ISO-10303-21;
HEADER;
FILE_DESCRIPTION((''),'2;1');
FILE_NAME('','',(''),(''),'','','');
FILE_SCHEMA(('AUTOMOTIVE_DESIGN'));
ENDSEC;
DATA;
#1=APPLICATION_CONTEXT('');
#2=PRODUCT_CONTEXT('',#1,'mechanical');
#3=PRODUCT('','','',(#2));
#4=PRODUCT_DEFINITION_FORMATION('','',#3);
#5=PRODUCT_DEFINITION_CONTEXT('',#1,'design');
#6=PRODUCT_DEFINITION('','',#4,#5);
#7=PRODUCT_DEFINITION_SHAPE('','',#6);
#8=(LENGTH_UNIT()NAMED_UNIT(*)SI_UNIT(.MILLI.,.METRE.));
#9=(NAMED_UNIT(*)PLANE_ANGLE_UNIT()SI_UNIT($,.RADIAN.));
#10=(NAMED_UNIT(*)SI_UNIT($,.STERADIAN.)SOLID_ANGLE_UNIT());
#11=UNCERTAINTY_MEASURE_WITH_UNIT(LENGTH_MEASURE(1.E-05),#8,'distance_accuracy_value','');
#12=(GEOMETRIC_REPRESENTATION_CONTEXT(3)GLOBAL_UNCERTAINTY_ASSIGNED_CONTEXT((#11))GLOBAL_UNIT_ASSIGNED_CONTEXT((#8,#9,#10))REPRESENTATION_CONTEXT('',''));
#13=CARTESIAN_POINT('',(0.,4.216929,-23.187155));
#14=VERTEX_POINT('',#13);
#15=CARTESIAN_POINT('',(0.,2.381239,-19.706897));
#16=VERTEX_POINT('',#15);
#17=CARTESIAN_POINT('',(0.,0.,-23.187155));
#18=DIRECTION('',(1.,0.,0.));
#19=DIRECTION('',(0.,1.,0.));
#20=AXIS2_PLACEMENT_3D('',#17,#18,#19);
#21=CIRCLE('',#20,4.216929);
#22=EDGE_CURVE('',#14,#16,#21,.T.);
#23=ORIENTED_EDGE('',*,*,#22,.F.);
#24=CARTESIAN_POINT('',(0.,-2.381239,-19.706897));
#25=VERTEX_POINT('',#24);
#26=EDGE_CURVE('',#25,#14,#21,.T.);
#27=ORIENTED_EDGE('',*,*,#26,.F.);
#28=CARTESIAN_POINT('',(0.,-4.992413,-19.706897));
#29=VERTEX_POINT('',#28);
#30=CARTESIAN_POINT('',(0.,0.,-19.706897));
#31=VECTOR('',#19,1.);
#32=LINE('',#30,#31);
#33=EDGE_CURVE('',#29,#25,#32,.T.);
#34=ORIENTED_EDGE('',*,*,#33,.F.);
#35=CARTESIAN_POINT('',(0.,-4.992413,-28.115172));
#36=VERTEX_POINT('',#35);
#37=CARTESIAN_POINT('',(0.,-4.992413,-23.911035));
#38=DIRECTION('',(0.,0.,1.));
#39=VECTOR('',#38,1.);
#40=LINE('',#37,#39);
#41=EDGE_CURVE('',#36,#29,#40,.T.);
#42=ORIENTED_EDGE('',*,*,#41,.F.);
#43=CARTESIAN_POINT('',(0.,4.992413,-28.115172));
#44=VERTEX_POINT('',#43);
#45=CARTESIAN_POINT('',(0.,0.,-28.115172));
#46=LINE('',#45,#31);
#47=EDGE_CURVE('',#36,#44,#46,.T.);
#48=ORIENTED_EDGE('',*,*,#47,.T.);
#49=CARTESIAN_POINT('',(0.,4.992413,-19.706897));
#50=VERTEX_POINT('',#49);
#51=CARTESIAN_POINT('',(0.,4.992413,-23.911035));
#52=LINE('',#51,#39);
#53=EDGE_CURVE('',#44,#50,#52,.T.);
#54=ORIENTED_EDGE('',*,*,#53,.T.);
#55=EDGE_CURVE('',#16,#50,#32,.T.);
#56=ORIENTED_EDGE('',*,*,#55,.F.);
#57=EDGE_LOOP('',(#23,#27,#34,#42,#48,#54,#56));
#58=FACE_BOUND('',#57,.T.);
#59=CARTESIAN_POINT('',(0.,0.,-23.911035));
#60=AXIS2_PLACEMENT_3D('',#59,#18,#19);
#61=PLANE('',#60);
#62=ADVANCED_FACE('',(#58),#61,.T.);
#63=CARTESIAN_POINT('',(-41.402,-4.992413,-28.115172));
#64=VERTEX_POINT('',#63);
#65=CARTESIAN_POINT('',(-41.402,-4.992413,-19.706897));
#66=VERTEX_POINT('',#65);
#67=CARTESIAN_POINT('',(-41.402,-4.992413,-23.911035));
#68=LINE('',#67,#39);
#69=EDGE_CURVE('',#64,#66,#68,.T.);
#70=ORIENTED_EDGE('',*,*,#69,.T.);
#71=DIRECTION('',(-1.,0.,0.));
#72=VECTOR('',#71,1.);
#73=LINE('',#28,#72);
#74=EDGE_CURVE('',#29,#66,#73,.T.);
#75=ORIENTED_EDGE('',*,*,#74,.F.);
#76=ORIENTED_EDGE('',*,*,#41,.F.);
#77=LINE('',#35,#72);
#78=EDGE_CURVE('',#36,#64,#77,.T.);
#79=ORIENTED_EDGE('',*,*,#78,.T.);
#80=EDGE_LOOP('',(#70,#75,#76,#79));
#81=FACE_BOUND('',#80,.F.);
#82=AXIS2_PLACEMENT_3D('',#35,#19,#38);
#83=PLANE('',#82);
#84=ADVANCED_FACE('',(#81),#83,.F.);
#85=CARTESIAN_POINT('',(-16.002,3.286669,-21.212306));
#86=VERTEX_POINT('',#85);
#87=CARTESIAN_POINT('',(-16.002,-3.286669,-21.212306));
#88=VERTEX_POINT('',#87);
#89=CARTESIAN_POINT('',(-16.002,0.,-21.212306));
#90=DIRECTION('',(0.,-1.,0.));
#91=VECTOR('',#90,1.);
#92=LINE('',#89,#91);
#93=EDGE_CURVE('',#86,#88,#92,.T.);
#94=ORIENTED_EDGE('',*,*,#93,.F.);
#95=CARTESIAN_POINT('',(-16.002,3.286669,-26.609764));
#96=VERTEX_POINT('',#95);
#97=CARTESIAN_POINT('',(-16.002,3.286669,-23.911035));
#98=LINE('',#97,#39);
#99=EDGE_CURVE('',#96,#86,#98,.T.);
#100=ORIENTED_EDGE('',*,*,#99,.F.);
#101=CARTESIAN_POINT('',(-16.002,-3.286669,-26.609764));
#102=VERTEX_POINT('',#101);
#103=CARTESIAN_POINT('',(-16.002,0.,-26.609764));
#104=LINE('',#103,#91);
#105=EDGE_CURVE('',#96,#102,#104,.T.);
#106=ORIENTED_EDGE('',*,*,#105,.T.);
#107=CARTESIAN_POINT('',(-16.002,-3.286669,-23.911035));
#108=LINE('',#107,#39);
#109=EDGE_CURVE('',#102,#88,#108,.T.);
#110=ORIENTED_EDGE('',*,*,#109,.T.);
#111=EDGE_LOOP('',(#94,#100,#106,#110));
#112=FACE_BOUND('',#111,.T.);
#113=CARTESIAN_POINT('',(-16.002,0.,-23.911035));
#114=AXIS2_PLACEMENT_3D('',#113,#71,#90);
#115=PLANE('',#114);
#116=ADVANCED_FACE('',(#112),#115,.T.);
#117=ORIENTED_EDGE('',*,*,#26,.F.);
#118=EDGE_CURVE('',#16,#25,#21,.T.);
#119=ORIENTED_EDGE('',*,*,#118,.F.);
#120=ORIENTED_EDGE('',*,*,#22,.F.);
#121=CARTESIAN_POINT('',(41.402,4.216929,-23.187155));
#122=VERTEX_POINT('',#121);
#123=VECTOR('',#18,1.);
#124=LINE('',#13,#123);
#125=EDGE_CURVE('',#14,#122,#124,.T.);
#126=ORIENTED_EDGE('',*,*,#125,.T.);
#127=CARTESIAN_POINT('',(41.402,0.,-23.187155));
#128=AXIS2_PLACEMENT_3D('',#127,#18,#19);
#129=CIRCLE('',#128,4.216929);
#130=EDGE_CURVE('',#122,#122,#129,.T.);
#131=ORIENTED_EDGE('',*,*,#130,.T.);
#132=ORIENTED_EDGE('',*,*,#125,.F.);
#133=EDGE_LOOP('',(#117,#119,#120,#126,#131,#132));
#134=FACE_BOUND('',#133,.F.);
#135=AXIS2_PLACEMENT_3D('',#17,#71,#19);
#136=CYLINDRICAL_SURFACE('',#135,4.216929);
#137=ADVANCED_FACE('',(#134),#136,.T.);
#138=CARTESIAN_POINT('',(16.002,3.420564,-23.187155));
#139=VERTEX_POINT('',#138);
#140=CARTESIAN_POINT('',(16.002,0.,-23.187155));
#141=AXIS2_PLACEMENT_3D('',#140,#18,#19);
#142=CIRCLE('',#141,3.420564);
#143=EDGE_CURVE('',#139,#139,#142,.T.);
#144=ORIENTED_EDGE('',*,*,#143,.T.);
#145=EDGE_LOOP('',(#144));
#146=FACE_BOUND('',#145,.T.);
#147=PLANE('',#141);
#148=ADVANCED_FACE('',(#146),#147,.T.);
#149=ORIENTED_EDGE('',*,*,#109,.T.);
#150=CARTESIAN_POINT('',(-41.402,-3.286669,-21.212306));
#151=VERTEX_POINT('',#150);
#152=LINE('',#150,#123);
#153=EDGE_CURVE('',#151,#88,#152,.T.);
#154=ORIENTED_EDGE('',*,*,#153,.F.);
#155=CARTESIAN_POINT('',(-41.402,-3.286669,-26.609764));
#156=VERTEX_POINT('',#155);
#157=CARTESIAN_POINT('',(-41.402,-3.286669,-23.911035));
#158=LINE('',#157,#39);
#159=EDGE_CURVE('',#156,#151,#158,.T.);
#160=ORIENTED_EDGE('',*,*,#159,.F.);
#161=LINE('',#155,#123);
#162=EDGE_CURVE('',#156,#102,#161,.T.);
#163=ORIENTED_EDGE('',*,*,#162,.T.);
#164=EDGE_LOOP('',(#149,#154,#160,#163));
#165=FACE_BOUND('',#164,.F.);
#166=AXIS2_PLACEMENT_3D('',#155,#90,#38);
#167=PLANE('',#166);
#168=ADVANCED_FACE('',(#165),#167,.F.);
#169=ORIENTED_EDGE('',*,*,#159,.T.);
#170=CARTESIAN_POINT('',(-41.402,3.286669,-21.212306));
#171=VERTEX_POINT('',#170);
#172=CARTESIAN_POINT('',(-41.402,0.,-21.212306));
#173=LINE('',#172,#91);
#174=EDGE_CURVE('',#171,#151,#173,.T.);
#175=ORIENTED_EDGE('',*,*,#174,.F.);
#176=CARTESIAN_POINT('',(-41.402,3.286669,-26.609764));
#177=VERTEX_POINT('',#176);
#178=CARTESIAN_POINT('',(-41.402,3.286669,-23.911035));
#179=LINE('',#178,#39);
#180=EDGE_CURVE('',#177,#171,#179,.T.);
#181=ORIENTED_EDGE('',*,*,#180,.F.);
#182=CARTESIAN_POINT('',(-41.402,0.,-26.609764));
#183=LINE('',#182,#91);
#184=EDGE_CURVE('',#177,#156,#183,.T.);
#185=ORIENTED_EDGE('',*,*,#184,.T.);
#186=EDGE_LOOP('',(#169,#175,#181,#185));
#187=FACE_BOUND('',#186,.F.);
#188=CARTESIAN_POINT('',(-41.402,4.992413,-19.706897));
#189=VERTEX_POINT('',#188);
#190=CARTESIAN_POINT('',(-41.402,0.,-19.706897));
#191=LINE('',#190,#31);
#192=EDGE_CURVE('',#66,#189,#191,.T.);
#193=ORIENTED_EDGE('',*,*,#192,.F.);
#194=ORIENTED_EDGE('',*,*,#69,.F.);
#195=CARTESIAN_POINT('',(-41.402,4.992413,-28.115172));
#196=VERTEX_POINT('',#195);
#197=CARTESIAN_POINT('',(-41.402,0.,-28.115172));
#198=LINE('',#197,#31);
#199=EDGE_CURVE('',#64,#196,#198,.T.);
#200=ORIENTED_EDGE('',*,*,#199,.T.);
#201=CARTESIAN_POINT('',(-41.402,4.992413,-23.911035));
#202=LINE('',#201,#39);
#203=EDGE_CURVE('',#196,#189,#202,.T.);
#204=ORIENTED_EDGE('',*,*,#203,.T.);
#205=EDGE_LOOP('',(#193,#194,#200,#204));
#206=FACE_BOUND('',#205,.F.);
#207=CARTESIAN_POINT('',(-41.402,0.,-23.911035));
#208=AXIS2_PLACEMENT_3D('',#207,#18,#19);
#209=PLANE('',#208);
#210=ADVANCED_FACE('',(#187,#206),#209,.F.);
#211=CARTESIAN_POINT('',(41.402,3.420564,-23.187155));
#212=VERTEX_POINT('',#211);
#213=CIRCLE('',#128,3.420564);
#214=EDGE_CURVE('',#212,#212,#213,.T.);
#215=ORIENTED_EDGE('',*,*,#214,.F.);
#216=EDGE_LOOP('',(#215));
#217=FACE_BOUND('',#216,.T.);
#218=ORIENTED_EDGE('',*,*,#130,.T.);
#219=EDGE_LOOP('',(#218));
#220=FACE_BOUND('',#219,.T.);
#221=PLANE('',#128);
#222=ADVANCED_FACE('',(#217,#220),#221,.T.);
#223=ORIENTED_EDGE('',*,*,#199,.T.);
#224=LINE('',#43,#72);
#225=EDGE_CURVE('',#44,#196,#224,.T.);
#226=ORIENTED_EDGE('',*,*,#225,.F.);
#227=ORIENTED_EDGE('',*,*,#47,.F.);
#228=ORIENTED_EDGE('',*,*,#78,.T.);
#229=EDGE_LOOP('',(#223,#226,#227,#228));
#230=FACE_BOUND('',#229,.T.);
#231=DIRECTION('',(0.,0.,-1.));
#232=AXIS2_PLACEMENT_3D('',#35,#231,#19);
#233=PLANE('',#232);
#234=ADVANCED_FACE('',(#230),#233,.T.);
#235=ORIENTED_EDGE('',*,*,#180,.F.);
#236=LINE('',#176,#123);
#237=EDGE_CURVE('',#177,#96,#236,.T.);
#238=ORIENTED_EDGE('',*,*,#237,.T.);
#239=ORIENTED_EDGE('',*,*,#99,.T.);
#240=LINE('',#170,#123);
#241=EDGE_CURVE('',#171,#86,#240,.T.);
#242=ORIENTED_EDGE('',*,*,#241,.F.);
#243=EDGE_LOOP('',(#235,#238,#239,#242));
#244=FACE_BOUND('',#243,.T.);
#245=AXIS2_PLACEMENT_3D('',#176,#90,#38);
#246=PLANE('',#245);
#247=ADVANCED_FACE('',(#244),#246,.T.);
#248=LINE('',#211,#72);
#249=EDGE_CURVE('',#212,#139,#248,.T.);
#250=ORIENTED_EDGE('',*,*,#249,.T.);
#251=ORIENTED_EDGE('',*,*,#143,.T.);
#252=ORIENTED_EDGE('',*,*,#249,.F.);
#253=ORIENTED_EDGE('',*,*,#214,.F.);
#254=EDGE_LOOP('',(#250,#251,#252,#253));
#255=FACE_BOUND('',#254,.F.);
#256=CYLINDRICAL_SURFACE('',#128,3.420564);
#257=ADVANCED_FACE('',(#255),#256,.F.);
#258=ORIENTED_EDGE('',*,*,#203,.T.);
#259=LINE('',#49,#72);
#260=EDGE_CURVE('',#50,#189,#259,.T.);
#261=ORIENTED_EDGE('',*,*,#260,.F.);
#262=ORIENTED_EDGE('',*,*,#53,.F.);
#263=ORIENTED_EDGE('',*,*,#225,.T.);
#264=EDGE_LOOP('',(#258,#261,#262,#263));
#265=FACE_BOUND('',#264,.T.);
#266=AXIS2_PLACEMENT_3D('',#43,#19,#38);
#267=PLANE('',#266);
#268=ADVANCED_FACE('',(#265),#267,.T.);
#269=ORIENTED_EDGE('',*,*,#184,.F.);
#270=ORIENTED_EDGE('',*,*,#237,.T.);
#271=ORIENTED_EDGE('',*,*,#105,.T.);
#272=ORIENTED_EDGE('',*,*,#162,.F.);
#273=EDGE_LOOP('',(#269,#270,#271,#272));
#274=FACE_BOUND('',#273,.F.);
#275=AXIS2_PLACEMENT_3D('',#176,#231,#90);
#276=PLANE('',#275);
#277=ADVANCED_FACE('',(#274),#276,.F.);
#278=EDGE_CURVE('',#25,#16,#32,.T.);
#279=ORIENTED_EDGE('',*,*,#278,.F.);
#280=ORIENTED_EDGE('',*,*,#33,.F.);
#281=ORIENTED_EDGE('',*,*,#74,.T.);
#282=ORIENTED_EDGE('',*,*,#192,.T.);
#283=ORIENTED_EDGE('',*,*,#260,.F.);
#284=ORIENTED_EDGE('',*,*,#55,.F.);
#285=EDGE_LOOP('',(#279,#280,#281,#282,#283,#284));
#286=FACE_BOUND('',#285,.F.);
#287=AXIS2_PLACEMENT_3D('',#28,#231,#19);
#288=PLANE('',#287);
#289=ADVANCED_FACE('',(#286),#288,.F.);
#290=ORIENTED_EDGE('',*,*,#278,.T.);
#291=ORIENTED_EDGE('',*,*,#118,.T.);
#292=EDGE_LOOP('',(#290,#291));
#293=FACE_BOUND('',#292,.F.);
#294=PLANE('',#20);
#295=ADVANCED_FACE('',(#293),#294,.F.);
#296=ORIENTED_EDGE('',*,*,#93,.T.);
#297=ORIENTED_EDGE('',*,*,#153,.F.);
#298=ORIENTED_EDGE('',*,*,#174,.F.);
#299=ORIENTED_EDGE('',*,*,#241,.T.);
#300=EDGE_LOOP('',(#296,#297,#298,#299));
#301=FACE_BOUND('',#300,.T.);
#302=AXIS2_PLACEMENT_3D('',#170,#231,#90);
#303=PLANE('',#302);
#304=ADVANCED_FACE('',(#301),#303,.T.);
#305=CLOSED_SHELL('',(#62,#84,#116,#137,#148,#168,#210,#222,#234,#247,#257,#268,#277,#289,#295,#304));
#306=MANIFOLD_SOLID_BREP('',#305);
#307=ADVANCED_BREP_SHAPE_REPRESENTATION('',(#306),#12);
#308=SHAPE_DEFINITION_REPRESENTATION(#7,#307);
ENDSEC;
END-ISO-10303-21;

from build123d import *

# Parameters (mm, degrees)
F2_R     = 4.2169292551
F3_DEPTH = 41.402
F4_R     = 3.4205639175
F5_DEPTH = 25.4
F6_W     = 9.9848257378
F6_H     = 8.4082745016
F7_DEPTH = 41.402
F8_W     = 6.5733380616
F8_H     = 5.3974576294
F9_DEPTH = 25.4


# Not quite as in the source:
# - the program builds the solid bodies; features that only make, move or delete a surface that nothing else refers to are left out


with BuildPart() as f3:
    # F2 (on Right) → F3 (new body)
    with BuildSketch(Plane.YZ):
        with Locations((0, -23.187154904)):
            Circle(F2_R)
    extrude(amount=F3_DEPTH)

    # F4 (on face) → F5 (cut)
    with BuildSketch(Plane.YZ.offset(41.402)):
        with Locations((0, -23.187154904)):
            Circle(F4_R)
    extrude(amount=-F5_DEPTH, mode=Mode.SUBTRACT)

    # F6 (on Right) → F7 (join)
    with BuildSketch(Plane.YZ):
        with Locations((0, -23.9110346884)):
            Rectangle(F6_W, F6_H)
    extrude(amount=-F7_DEPTH)

    # F8 (on face) → F9 (cut)
    with BuildSketch(Plane(origin=(-41.402, 0, 0), x_dir=(0, -1, 0), z_dir=(-1, 0, 0))):
        with Locations((0, -23.9110346884)):
            Rectangle(F8_W, F8_H)
    extrude(amount=-F9_DEPTH, mode=Mode.SUBTRACT)


solid = f3.part
